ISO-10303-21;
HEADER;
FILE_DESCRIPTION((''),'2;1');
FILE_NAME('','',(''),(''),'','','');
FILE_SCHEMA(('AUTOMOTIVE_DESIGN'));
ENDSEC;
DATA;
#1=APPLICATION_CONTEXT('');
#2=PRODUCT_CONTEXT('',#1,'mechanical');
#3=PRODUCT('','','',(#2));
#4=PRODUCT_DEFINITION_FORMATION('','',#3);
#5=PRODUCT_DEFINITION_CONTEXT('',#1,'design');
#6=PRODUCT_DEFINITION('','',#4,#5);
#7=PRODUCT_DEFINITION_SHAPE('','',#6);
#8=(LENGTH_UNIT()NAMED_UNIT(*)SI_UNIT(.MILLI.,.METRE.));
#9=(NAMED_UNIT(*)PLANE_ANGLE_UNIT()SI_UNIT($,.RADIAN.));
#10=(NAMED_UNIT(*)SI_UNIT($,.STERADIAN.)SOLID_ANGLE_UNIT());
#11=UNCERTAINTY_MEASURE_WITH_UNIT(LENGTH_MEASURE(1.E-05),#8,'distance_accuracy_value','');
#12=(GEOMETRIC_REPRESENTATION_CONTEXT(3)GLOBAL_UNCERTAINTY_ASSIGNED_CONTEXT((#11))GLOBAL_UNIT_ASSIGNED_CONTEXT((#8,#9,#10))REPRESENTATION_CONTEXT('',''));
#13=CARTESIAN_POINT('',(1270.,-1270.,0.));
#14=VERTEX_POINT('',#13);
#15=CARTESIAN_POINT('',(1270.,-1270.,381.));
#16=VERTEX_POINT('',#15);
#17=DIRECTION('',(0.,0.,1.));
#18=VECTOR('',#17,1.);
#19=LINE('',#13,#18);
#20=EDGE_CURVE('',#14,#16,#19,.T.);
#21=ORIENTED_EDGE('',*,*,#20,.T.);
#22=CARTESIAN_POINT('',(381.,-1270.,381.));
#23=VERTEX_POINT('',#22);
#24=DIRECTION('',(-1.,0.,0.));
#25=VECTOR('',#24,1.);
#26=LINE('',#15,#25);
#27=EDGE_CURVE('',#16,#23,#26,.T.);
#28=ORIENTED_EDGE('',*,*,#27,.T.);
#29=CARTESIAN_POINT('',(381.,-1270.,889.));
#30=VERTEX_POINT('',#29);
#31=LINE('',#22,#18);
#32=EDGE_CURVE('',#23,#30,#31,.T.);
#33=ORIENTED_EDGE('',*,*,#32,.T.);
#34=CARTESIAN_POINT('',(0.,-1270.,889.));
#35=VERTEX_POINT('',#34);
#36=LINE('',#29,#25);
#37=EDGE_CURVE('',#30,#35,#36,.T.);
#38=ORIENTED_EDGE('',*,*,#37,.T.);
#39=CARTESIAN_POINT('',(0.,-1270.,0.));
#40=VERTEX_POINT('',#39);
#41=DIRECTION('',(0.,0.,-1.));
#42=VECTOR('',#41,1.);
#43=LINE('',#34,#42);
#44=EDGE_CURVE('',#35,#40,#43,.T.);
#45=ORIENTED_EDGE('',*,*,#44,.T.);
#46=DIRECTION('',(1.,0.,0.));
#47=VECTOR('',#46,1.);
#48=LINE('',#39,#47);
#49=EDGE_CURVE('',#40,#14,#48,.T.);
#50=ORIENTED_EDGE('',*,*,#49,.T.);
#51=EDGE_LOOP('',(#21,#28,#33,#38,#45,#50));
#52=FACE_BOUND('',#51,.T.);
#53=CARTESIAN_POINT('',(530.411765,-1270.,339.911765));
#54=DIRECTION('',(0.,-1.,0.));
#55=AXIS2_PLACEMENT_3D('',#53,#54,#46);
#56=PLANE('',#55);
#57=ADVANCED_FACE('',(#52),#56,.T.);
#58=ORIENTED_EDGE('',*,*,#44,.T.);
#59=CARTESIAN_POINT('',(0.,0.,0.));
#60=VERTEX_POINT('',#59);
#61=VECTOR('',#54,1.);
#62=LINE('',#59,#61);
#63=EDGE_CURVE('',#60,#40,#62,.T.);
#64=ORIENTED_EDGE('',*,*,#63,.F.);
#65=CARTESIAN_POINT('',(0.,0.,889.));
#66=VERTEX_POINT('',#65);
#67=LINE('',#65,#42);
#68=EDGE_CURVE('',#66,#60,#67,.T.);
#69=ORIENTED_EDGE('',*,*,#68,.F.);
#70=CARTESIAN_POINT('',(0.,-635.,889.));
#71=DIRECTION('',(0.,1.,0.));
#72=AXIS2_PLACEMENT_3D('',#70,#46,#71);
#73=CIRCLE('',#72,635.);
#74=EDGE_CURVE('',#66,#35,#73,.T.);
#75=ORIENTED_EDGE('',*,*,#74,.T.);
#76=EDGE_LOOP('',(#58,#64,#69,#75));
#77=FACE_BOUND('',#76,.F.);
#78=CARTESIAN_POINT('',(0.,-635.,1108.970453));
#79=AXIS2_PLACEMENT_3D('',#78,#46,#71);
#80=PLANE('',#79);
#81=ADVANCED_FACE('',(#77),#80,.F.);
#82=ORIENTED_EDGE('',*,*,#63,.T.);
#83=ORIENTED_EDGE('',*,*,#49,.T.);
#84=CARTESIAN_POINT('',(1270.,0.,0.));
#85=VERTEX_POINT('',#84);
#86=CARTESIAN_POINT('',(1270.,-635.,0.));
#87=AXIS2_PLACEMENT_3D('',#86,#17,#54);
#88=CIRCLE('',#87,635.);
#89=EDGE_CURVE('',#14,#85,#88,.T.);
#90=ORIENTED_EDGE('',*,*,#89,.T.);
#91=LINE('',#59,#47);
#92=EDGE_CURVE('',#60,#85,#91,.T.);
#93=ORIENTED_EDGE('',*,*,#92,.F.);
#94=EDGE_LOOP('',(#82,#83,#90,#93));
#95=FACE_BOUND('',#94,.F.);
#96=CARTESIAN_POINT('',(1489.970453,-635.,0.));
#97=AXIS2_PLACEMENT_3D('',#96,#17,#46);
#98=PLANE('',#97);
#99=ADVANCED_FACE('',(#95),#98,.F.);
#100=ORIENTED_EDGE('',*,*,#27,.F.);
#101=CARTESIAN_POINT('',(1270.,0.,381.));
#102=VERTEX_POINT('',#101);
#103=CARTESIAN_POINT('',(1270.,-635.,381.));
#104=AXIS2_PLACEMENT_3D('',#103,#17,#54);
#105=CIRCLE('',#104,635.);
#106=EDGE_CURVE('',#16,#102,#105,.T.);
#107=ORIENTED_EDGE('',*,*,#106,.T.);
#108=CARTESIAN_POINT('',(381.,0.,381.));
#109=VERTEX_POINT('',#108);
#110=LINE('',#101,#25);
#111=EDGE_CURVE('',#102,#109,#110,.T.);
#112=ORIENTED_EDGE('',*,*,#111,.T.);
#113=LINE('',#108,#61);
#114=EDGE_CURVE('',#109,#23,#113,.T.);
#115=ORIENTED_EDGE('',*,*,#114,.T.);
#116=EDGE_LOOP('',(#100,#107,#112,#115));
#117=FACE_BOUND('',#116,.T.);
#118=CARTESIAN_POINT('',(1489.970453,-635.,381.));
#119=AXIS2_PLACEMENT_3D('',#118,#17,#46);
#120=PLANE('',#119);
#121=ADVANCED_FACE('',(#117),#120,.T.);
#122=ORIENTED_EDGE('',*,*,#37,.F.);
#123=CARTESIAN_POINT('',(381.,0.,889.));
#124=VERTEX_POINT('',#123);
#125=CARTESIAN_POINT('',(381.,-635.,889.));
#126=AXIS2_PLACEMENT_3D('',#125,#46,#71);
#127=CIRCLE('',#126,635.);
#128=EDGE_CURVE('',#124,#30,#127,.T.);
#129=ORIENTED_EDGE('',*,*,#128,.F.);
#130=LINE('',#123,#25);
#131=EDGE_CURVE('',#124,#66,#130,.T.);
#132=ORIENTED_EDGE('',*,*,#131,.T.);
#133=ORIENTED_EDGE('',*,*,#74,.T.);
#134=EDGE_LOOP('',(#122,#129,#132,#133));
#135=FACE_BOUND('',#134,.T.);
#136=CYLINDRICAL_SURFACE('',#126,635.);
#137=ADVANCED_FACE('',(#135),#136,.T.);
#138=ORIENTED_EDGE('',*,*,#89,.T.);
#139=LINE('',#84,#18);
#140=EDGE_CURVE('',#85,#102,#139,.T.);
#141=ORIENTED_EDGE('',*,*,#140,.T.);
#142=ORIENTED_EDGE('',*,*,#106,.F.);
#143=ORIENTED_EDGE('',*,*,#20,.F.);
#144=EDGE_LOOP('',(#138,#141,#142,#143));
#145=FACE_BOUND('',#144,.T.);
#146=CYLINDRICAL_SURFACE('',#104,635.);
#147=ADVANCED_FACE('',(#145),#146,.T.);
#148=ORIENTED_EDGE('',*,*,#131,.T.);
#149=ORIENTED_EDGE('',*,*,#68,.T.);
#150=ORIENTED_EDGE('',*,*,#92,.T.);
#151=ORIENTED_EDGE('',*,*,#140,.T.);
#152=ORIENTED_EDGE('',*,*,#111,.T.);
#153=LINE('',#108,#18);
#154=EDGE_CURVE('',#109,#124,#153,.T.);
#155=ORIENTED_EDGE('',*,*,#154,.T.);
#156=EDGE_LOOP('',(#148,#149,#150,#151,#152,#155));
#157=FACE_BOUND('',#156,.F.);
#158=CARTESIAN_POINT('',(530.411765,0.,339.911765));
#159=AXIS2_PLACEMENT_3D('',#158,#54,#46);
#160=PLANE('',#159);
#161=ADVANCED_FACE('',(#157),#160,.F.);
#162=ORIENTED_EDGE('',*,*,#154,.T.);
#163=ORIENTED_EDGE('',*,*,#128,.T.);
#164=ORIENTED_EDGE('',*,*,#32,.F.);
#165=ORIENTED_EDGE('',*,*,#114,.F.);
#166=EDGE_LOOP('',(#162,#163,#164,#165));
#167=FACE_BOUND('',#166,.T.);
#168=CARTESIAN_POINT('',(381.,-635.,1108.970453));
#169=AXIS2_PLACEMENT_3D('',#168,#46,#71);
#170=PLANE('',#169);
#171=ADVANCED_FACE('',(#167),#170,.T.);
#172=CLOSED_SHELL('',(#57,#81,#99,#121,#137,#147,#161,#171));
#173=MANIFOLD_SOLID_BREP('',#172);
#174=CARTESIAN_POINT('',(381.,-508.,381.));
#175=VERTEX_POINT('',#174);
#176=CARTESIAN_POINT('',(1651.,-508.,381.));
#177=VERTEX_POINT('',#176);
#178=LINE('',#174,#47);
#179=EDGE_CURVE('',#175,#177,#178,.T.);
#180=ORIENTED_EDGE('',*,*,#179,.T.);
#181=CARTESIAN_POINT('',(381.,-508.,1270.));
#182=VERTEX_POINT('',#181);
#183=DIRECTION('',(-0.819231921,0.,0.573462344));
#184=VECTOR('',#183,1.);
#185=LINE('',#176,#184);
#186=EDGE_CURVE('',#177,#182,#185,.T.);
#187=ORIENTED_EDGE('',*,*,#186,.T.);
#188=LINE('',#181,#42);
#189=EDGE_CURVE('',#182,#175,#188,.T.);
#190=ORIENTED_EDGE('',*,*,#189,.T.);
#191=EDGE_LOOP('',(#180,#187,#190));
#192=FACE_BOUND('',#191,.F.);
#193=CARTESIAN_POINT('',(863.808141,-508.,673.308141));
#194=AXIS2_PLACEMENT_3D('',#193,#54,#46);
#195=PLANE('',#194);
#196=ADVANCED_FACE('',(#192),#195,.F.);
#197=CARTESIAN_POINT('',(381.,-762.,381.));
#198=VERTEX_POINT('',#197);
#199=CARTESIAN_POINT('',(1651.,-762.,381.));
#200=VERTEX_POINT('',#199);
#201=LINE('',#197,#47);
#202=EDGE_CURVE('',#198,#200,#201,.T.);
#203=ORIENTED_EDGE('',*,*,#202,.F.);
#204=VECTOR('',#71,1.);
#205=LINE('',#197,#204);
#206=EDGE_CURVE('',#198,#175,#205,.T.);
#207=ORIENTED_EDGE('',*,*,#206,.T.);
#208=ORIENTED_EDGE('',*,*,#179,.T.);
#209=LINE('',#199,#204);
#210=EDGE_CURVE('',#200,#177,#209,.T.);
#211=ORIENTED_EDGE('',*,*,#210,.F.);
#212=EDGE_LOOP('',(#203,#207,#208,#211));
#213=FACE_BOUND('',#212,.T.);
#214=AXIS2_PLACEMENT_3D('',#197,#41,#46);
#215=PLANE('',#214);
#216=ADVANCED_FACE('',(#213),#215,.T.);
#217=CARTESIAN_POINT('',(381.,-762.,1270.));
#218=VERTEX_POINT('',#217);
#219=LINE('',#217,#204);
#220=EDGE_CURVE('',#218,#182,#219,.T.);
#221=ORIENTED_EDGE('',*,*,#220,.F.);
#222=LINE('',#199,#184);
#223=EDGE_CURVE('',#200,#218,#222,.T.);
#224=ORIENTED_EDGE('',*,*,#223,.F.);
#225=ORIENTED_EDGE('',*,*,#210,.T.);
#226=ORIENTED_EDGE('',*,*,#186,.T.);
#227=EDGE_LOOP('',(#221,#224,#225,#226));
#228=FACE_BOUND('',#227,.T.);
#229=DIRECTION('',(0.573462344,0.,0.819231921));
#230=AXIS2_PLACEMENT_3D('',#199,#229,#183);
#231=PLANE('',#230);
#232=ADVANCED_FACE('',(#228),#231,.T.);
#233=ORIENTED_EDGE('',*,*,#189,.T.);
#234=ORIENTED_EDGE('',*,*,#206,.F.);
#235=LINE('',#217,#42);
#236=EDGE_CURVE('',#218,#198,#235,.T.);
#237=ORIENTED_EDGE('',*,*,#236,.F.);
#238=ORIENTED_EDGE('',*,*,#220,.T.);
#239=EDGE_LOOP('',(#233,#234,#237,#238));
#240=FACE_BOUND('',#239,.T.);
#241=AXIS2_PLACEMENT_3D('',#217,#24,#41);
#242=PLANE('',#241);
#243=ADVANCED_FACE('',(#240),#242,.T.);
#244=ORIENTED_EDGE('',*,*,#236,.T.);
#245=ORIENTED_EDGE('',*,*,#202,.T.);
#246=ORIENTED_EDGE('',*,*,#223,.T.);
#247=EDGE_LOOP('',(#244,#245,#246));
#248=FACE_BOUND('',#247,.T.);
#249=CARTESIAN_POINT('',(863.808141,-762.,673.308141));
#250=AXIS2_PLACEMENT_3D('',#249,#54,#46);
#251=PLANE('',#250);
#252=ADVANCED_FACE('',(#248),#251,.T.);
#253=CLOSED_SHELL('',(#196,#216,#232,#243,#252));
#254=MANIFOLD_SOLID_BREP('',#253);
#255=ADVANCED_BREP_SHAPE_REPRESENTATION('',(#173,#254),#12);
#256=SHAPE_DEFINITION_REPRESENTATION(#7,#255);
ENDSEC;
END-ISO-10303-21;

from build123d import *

# Parameters (mm, degrees)
F1_DEPTH = 1270
F3_DEPTH = 381
F5_DEPTH = 381
F7_START = -508
F7_DEPTH = 254


# Not quite as in the source:
# - a feature names something its author has since deleted; it is built from what else it names


with BuildPart() as f1:
    # F0 (on Front) → F1 (new body)
    with BuildSketch(Plane.XZ):
        Polygon((0, 889), (0, 0), (1270, 0), (1270, 381), (381, 381), (381, 889), align=None)
    extrude(amount=F1_DEPTH)

    # F2 (on face) → F3 (join, through all)
    with BuildSketch(Plane.YZ.offset(381)):
        with BuildLine():
            Line((-1270, 889), (0, 889))
            ThreePointArc((0, 889), (-635, 1524), (-1270, 889))
        make_face()
    extrude(amount=-F3_DEPTH)

    # F4 (on face) → F5 (join, through all)
    with BuildSketch(Plane.XY.offset(381)):
        with BuildLine():
            Line((1270, 0), (1270, -1270))
            ThreePointArc((1270, -1270), (1905, -635), (1270, 0))
        make_face()
    extrude(amount=-F5_DEPTH)


with BuildPart() as f7:
    # F6 (on face) → F7 (new body)
    with BuildSketch(Plane.XZ.offset(1270).offset(F7_START)):
        Polygon((1651, 381), (381, 1270), (381, 889), (381, 381), (1270, 381), align=None)
    extrude(amount=-F7_DEPTH)


solid = Compound([f1.part, f7.part])
